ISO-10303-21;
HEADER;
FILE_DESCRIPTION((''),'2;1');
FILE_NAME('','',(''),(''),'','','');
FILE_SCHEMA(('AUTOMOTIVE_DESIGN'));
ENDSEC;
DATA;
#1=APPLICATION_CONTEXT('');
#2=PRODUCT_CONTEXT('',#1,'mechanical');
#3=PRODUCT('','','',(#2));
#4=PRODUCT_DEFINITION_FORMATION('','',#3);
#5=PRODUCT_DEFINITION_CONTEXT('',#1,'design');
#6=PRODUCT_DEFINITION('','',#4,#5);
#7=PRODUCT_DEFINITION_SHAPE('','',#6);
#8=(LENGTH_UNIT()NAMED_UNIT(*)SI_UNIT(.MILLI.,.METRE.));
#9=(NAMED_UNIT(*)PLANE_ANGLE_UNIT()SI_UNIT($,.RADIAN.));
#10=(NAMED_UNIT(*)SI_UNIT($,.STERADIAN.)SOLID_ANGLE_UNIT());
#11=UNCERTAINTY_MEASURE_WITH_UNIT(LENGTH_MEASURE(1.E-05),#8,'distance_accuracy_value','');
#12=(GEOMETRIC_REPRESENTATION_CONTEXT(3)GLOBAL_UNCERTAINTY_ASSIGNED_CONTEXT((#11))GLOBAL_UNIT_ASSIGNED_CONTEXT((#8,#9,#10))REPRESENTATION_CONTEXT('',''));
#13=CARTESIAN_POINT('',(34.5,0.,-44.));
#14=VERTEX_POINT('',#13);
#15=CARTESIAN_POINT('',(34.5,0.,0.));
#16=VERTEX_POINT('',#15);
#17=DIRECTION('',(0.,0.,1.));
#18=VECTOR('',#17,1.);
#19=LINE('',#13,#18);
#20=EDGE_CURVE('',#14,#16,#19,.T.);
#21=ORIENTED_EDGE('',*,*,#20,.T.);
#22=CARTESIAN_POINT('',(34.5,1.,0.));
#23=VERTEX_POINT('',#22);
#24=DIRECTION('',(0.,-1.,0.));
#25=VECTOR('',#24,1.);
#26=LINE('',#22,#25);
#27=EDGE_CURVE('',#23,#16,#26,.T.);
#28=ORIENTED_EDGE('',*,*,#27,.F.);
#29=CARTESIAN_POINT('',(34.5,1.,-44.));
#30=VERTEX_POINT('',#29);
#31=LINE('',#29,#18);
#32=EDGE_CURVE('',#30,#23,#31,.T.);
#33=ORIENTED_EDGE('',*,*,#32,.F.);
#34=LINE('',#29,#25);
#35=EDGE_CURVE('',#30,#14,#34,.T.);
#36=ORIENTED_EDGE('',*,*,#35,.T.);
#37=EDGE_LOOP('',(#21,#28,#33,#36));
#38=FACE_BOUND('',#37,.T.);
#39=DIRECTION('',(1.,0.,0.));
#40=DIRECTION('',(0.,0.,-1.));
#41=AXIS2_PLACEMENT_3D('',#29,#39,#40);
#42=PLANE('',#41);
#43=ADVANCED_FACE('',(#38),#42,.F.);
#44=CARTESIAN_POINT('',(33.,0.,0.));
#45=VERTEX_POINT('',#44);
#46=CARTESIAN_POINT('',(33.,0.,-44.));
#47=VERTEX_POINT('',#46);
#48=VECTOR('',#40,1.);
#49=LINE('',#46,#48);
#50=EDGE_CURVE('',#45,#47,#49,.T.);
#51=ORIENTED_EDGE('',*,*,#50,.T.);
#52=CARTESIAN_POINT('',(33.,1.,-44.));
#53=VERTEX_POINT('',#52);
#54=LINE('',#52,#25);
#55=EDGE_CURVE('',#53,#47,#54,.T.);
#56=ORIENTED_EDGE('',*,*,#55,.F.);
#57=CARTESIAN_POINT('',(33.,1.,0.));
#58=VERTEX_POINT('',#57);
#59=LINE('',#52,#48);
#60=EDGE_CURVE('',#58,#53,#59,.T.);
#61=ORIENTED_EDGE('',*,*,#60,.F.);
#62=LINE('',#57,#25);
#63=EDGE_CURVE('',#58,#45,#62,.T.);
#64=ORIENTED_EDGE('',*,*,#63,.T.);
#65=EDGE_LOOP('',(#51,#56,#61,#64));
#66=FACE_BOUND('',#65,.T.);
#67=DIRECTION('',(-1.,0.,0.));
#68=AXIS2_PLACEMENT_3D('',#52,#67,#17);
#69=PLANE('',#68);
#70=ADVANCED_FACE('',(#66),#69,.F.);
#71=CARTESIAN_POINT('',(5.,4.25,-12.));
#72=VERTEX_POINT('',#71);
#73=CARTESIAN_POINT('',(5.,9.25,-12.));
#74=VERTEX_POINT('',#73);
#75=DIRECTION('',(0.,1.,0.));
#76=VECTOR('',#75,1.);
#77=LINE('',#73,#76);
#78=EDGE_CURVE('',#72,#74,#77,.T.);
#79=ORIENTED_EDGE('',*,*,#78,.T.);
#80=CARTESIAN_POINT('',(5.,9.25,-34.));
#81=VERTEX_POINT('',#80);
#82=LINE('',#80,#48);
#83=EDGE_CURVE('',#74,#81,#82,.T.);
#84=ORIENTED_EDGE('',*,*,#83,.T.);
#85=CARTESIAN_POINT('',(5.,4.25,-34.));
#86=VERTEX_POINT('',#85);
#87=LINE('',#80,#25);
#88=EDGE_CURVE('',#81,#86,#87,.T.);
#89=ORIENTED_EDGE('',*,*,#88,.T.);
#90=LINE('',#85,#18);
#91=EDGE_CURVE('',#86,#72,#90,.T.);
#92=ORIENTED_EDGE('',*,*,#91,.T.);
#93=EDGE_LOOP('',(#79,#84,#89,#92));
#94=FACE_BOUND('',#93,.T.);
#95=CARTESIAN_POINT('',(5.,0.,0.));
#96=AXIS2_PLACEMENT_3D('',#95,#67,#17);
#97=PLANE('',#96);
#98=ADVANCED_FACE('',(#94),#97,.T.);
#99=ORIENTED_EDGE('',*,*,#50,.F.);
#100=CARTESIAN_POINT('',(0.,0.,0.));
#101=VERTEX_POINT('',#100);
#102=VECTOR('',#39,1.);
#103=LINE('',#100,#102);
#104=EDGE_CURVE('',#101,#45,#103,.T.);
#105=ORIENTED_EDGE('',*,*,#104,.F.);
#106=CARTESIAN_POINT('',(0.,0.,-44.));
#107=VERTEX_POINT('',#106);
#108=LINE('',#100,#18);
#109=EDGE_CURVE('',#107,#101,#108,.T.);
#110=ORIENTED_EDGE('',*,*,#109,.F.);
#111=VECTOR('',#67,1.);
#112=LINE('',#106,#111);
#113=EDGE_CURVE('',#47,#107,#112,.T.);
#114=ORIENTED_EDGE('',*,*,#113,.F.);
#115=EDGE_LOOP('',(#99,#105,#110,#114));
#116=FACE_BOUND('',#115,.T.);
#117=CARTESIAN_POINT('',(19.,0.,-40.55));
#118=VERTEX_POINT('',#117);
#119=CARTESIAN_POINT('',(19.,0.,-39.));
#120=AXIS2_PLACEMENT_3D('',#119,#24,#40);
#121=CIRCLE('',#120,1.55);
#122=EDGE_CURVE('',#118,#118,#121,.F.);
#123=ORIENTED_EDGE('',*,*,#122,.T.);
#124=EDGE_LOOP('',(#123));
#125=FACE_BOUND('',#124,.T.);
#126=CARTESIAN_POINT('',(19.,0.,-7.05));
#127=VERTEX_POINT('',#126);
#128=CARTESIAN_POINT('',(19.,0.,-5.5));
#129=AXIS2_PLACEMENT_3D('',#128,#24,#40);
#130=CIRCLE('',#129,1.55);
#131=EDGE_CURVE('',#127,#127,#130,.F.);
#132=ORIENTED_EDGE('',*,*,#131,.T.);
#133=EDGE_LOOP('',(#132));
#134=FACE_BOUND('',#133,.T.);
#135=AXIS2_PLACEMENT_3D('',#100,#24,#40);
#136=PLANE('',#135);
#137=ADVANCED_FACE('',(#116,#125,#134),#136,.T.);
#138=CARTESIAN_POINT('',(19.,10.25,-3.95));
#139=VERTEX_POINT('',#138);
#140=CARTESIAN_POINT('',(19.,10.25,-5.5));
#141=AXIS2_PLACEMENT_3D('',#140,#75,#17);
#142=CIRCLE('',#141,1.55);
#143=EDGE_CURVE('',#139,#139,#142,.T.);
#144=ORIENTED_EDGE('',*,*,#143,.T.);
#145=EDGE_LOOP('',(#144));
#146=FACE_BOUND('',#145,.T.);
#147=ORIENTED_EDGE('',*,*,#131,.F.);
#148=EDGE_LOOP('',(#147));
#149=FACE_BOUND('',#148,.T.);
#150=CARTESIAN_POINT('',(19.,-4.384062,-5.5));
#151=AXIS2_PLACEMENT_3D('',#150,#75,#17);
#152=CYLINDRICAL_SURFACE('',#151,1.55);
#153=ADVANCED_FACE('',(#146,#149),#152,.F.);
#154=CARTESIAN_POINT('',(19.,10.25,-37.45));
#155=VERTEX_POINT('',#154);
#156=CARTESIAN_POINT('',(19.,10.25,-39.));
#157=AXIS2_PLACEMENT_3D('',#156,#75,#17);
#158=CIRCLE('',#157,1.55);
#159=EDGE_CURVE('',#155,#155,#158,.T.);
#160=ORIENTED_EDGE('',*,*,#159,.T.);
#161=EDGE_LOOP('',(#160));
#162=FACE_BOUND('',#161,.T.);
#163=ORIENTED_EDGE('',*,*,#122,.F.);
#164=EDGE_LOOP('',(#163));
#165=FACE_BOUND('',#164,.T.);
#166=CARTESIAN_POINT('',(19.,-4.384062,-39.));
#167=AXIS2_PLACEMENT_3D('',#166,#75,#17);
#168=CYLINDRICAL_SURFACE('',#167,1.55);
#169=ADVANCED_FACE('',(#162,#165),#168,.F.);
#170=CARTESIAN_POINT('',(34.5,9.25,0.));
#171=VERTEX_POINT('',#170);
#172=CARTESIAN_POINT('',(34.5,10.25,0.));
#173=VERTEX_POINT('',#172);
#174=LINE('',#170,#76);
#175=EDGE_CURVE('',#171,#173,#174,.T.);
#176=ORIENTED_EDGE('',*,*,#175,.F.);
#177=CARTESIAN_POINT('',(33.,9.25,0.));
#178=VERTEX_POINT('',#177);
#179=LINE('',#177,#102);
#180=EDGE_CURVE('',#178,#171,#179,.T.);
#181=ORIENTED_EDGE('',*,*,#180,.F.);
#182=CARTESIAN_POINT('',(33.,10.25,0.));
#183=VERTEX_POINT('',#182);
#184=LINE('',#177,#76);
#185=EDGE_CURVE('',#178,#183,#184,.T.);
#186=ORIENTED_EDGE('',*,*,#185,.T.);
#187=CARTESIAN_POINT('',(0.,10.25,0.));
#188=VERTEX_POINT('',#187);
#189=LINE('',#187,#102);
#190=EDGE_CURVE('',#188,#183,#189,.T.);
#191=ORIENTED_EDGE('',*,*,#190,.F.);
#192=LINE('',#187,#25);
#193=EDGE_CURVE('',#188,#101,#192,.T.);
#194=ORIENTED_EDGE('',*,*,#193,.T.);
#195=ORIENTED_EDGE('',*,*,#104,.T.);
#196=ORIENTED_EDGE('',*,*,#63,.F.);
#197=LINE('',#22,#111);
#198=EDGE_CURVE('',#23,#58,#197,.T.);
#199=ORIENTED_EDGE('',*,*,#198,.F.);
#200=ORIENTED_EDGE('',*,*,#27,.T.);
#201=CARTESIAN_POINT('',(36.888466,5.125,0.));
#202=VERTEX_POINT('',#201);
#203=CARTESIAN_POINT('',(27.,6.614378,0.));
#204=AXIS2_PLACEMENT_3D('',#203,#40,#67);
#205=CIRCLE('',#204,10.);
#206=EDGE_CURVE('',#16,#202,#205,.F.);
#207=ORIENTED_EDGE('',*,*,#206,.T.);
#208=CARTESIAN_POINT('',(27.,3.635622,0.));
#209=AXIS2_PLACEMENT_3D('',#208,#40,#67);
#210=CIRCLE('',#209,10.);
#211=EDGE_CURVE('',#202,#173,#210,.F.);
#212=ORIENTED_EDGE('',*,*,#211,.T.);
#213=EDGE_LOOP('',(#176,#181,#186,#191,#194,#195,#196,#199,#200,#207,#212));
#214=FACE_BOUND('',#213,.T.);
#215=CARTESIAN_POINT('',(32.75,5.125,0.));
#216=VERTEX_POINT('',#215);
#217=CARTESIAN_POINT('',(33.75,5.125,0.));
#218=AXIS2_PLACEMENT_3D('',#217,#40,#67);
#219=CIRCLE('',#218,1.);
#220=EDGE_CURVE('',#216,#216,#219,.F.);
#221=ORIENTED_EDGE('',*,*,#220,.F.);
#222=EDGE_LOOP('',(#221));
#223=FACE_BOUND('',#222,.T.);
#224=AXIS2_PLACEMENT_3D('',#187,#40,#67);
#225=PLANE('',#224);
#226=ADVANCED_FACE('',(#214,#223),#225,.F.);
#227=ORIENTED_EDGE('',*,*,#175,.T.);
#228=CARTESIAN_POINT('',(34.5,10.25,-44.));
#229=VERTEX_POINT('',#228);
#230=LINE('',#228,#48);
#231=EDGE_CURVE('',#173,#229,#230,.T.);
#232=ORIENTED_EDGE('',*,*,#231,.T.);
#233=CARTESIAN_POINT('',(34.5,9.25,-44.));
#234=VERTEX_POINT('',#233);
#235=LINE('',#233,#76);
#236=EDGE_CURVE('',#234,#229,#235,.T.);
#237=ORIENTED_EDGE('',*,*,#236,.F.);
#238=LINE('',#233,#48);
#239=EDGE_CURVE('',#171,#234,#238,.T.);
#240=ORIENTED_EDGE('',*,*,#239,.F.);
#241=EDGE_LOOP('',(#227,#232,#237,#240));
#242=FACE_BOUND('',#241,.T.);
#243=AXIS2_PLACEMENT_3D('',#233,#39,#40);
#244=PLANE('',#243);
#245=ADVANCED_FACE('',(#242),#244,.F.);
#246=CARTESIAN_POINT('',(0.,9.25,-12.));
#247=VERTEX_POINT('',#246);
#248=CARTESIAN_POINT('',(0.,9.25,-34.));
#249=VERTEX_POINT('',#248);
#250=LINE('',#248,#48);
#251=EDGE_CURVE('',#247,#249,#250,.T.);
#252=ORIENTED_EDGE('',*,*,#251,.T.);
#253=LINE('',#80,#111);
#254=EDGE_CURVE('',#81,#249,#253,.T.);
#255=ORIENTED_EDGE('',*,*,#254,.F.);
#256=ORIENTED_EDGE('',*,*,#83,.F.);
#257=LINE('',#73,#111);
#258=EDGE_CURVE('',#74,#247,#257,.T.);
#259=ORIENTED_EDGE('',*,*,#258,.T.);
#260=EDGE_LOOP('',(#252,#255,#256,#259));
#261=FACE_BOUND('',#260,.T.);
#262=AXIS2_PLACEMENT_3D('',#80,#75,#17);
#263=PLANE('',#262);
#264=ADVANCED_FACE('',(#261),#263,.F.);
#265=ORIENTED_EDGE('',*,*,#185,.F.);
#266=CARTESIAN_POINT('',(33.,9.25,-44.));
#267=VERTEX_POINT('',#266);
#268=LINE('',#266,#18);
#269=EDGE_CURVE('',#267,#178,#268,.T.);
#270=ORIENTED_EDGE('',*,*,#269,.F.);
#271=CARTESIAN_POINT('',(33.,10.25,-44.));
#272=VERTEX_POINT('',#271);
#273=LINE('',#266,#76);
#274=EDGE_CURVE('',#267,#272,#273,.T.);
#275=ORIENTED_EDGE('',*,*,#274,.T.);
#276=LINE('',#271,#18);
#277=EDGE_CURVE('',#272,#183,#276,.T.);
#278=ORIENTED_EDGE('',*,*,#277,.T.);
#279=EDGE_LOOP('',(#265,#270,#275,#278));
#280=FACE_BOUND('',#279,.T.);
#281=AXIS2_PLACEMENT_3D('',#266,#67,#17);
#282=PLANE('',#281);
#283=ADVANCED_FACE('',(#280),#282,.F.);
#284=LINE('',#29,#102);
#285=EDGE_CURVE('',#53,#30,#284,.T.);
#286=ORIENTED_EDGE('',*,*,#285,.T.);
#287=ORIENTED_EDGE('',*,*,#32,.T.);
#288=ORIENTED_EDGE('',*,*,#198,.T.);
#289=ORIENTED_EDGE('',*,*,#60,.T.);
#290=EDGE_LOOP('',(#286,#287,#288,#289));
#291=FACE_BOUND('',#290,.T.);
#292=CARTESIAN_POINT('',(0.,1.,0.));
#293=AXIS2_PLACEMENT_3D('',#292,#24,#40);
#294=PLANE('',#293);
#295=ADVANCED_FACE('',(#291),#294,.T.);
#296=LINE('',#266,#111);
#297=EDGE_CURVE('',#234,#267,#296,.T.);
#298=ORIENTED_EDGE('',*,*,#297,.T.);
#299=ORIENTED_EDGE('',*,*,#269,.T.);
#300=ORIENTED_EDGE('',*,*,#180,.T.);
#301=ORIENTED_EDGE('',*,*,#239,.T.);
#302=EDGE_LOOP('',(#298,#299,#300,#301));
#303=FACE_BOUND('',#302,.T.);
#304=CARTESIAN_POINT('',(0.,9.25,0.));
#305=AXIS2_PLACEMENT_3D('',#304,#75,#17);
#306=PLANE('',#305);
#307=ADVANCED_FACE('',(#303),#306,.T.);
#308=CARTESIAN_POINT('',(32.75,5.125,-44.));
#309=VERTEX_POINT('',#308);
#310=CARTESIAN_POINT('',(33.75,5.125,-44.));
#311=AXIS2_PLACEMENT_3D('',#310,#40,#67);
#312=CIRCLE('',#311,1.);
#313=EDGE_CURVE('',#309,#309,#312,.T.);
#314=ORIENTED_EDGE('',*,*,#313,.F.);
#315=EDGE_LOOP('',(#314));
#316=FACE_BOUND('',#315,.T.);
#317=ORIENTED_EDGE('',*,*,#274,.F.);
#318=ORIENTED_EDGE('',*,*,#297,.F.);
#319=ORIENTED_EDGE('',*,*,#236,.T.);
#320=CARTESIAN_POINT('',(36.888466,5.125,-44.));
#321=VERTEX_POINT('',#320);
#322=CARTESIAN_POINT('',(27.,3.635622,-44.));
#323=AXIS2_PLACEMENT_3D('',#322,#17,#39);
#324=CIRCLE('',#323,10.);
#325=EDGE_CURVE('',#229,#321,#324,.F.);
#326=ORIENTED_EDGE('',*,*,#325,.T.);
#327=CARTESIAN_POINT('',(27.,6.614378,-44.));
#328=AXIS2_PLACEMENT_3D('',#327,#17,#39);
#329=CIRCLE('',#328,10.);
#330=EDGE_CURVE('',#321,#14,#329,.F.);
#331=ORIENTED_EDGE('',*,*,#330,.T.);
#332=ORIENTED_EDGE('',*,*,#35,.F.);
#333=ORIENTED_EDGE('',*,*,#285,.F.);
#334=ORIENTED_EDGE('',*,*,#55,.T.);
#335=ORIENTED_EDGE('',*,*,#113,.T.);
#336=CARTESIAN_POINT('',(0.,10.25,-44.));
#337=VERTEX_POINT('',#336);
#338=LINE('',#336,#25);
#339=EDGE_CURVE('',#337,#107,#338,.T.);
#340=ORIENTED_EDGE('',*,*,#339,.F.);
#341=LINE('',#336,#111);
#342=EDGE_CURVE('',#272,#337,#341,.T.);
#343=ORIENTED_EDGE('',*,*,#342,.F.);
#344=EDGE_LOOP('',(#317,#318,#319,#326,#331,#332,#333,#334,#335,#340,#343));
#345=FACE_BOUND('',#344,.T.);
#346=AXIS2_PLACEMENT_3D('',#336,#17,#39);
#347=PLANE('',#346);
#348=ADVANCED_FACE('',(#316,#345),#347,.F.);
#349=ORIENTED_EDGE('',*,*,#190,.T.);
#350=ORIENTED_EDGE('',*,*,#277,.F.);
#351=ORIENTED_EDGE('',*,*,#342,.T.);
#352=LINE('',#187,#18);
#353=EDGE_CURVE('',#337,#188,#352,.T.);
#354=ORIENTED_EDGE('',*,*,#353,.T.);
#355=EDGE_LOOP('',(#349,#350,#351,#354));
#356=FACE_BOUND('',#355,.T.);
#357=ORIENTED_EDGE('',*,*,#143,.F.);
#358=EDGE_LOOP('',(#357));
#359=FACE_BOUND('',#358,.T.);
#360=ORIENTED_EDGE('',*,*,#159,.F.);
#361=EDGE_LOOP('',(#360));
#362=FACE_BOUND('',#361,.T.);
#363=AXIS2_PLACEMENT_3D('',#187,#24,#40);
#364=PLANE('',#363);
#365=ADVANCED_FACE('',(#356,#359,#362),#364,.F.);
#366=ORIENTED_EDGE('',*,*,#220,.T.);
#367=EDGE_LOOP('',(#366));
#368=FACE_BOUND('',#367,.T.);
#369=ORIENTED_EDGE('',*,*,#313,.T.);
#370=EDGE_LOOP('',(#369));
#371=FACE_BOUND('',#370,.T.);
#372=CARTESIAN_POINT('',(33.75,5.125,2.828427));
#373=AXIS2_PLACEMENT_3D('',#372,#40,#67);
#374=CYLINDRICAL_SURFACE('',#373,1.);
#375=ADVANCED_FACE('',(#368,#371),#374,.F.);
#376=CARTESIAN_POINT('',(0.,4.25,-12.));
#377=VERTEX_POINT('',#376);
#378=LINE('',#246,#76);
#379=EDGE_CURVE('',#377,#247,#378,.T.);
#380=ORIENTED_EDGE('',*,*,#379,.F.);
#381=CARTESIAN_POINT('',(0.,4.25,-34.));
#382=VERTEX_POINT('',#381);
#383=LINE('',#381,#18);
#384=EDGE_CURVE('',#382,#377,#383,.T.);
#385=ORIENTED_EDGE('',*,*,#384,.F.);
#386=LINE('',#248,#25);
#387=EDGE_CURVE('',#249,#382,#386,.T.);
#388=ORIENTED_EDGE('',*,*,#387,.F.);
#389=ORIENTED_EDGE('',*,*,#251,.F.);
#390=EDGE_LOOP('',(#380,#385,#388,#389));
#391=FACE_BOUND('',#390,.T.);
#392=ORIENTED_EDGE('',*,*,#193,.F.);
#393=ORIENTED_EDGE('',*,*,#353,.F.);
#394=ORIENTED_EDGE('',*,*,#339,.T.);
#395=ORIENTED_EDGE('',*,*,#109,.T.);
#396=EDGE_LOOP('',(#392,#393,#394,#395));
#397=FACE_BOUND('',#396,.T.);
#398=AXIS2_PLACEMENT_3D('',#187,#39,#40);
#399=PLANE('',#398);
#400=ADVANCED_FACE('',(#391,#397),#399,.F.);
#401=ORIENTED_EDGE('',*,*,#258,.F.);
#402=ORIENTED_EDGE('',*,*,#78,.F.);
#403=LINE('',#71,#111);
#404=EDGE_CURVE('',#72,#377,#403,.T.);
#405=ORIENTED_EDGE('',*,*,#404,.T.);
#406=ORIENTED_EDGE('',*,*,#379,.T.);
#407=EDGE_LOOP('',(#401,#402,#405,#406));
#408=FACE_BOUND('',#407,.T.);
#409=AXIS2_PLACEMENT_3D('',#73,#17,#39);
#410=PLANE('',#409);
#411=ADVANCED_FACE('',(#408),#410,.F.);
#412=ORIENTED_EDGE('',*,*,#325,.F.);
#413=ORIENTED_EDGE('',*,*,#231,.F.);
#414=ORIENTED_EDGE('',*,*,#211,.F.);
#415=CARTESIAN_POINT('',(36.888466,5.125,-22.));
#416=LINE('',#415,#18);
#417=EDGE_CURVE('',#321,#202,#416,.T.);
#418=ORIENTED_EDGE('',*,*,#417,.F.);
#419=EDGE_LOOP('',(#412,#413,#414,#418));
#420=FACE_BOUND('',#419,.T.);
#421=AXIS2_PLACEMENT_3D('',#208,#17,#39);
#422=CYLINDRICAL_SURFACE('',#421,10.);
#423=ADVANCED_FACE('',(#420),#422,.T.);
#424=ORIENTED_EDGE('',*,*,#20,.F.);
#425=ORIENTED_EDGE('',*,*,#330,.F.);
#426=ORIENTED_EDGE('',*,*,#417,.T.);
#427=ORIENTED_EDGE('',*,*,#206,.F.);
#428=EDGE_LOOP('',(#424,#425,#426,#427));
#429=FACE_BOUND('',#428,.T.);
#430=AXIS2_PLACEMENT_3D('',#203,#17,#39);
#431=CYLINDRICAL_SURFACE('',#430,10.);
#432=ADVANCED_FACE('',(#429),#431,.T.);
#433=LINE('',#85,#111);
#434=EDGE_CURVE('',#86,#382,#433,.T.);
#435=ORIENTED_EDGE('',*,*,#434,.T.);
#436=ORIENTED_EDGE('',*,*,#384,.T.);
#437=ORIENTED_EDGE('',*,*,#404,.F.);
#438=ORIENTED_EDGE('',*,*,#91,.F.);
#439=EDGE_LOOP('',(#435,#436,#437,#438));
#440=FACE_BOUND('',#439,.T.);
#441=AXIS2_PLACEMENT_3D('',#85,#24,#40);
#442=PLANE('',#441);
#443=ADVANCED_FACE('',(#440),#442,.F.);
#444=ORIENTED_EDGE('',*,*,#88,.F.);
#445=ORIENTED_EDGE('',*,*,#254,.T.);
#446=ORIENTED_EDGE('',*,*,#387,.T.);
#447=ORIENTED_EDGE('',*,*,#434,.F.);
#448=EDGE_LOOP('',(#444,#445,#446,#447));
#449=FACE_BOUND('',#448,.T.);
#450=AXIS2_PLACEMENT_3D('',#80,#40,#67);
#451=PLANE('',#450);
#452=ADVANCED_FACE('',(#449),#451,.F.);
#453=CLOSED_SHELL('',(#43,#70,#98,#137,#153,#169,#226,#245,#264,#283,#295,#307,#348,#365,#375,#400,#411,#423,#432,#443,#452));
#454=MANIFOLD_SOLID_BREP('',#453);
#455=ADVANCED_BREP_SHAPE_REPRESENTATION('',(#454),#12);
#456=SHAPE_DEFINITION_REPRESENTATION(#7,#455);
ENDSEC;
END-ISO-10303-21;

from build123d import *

# Parameters (mm, degrees)
CROQUIS1_W              = 37
CROQUIS1_H              = 44
SALIENTE_EXTRUIR1_DEPTH = 10.25
CROQUIS2_R              = 1.55
CORTAR_EXTRUIR1_DEPTH   = 10.25
CROQUIS3_W              = 1.5
CROQUIS3_H              = 44
CORTAR_EXTRUIR2_DEPTH   = 1
CROQUIS4_W              = 1.5
CROQUIS4_H              = 44
CORTAR_EXTRUIR3_DEPTH   = 1
CROQUIS5_R              = 1
CORTAR_EXTRUIR4_DEPTH   = 44
CROQUIS6_W              = 22
CROQUIS6_H              = 5
CORTAR_EXTRUIR5_DEPTH   = 5
REDONDEO1_R             = 10


with BuildPart() as part:
    # Croquis1 → Saliente-Extruir1 (new body)
    with BuildSketch(Plane(origin=(0, 0, 0), x_dir=(1, 0, 0), z_dir=(0, 1, 0))):
        with Locations((18.5, 22)):
            Rectangle(CROQUIS1_W, CROQUIS1_H)
    extrude(amount=SALIENTE_EXTRUIR1_DEPTH)

    # Croquis2 → Cortar-Extruir1 (cut)
    with BuildSketch(Plane(origin=(0, 10.25, 0), x_dir=(1, 0, 0), z_dir=(0, 1, 0))):
        with Locations(Location((19, 39, 0), (0, 0, 270))):
            Circle(CROQUIS2_R)
        with Locations(Location((19, 5.5, 0), (0, 0, 270))):
            Circle(CROQUIS2_R)
    extrude(amount=-CORTAR_EXTRUIR1_DEPTH, mode=Mode.SUBTRACT)

    # Croquis3 → Cortar-Extruir2 (cut)
    with BuildSketch(Plane(origin=(0, 10.25, 0), x_dir=(1, 0, 0), z_dir=(0, 1, 0))):
        with Locations((33.75, 22)):
            Rectangle(CROQUIS3_W, CROQUIS3_H)
    extrude(amount=-CORTAR_EXTRUIR2_DEPTH, mode=Mode.SUBTRACT)

    # Croquis4 → Cortar-Extruir3 (cut)
    with BuildSketch(Plane.XZ):
        with Locations((33.75, -22)):
            Rectangle(CROQUIS4_W, CROQUIS4_H)
    extrude(amount=-CORTAR_EXTRUIR3_DEPTH, mode=Mode.SUBTRACT)

    # Croquis5 → Cortar-Extruir4 (cut)
    with BuildSketch(Plane(origin=(0, 0, -44), x_dir=(-1, 0, 0), z_dir=(0, 0, -1))):
        with Locations((-33.75, 5.125)):
            Circle(CROQUIS5_R)
    extrude(amount=-CORTAR_EXTRUIR4_DEPTH, mode=Mode.SUBTRACT)

    # Croquis6 → Cortar-Extruir5 (cut)
    with BuildSketch(Plane.ZY):
        with Locations((-23, 6.75)):
            Rectangle(CROQUIS6_W, CROQUIS6_H)
    extrude(amount=-CORTAR_EXTRUIR5_DEPTH, mode=Mode.SUBTRACT)

    # Redondeo1
    # the kernel refuses this fillet: 10 mm, written as the material it takes off along each edge
    with BuildSketch(Plane(origin=(37, 0, 16.535945694), x_dir=(-1, 0, 0), z_dir=(0, 0, -1))) as redondeo1_piece_1:
        with BuildLine():
            CenterArc((10, 6.614378278), REDONDEO1_R, 180, 41.409622109)
            Line((0, 6.614378278), (-0.2, 6.614378278))
            Line((-0.2, 6.614378278), (-0.2, 0))
            Line((-0.2, 0), (0, -0.2))
            ThreePointArc((0, -0.2), (1.25, -0.2), (2.35, -0.132287566))
            Line((2.35, -0.132287566), (2.5, 0))
        make_face()
    extrude(amount=77.071891388, mode=Mode.SUBTRACT)
    with BuildSketch(Plane(origin=(37, 10.25, 16.535945694), x_dir=(0, -1, 0), z_dir=(0, 0, -1))) as redondeo1_piece_2:
        with BuildLine():
            CenterArc((6.614378278, 10), REDONDEO1_R, 228.590377891, 41.409622109)
            Line((0, 2.5), (-0.132287566, 2.35))
            ThreePointArc((-0.132287566, 2.35), (-0.2, 1.25), (-0.2, 0))
            Line((-0.2, 0), (0, -0.2))
            Line((0, -0.2), (6.614378278, -0.2))
            Line((6.614378278, -0.2), (6.614378278, 0))
        make_face()
    extrude(amount=77.071891388, mode=Mode.SUBTRACT)


solid = part.part
